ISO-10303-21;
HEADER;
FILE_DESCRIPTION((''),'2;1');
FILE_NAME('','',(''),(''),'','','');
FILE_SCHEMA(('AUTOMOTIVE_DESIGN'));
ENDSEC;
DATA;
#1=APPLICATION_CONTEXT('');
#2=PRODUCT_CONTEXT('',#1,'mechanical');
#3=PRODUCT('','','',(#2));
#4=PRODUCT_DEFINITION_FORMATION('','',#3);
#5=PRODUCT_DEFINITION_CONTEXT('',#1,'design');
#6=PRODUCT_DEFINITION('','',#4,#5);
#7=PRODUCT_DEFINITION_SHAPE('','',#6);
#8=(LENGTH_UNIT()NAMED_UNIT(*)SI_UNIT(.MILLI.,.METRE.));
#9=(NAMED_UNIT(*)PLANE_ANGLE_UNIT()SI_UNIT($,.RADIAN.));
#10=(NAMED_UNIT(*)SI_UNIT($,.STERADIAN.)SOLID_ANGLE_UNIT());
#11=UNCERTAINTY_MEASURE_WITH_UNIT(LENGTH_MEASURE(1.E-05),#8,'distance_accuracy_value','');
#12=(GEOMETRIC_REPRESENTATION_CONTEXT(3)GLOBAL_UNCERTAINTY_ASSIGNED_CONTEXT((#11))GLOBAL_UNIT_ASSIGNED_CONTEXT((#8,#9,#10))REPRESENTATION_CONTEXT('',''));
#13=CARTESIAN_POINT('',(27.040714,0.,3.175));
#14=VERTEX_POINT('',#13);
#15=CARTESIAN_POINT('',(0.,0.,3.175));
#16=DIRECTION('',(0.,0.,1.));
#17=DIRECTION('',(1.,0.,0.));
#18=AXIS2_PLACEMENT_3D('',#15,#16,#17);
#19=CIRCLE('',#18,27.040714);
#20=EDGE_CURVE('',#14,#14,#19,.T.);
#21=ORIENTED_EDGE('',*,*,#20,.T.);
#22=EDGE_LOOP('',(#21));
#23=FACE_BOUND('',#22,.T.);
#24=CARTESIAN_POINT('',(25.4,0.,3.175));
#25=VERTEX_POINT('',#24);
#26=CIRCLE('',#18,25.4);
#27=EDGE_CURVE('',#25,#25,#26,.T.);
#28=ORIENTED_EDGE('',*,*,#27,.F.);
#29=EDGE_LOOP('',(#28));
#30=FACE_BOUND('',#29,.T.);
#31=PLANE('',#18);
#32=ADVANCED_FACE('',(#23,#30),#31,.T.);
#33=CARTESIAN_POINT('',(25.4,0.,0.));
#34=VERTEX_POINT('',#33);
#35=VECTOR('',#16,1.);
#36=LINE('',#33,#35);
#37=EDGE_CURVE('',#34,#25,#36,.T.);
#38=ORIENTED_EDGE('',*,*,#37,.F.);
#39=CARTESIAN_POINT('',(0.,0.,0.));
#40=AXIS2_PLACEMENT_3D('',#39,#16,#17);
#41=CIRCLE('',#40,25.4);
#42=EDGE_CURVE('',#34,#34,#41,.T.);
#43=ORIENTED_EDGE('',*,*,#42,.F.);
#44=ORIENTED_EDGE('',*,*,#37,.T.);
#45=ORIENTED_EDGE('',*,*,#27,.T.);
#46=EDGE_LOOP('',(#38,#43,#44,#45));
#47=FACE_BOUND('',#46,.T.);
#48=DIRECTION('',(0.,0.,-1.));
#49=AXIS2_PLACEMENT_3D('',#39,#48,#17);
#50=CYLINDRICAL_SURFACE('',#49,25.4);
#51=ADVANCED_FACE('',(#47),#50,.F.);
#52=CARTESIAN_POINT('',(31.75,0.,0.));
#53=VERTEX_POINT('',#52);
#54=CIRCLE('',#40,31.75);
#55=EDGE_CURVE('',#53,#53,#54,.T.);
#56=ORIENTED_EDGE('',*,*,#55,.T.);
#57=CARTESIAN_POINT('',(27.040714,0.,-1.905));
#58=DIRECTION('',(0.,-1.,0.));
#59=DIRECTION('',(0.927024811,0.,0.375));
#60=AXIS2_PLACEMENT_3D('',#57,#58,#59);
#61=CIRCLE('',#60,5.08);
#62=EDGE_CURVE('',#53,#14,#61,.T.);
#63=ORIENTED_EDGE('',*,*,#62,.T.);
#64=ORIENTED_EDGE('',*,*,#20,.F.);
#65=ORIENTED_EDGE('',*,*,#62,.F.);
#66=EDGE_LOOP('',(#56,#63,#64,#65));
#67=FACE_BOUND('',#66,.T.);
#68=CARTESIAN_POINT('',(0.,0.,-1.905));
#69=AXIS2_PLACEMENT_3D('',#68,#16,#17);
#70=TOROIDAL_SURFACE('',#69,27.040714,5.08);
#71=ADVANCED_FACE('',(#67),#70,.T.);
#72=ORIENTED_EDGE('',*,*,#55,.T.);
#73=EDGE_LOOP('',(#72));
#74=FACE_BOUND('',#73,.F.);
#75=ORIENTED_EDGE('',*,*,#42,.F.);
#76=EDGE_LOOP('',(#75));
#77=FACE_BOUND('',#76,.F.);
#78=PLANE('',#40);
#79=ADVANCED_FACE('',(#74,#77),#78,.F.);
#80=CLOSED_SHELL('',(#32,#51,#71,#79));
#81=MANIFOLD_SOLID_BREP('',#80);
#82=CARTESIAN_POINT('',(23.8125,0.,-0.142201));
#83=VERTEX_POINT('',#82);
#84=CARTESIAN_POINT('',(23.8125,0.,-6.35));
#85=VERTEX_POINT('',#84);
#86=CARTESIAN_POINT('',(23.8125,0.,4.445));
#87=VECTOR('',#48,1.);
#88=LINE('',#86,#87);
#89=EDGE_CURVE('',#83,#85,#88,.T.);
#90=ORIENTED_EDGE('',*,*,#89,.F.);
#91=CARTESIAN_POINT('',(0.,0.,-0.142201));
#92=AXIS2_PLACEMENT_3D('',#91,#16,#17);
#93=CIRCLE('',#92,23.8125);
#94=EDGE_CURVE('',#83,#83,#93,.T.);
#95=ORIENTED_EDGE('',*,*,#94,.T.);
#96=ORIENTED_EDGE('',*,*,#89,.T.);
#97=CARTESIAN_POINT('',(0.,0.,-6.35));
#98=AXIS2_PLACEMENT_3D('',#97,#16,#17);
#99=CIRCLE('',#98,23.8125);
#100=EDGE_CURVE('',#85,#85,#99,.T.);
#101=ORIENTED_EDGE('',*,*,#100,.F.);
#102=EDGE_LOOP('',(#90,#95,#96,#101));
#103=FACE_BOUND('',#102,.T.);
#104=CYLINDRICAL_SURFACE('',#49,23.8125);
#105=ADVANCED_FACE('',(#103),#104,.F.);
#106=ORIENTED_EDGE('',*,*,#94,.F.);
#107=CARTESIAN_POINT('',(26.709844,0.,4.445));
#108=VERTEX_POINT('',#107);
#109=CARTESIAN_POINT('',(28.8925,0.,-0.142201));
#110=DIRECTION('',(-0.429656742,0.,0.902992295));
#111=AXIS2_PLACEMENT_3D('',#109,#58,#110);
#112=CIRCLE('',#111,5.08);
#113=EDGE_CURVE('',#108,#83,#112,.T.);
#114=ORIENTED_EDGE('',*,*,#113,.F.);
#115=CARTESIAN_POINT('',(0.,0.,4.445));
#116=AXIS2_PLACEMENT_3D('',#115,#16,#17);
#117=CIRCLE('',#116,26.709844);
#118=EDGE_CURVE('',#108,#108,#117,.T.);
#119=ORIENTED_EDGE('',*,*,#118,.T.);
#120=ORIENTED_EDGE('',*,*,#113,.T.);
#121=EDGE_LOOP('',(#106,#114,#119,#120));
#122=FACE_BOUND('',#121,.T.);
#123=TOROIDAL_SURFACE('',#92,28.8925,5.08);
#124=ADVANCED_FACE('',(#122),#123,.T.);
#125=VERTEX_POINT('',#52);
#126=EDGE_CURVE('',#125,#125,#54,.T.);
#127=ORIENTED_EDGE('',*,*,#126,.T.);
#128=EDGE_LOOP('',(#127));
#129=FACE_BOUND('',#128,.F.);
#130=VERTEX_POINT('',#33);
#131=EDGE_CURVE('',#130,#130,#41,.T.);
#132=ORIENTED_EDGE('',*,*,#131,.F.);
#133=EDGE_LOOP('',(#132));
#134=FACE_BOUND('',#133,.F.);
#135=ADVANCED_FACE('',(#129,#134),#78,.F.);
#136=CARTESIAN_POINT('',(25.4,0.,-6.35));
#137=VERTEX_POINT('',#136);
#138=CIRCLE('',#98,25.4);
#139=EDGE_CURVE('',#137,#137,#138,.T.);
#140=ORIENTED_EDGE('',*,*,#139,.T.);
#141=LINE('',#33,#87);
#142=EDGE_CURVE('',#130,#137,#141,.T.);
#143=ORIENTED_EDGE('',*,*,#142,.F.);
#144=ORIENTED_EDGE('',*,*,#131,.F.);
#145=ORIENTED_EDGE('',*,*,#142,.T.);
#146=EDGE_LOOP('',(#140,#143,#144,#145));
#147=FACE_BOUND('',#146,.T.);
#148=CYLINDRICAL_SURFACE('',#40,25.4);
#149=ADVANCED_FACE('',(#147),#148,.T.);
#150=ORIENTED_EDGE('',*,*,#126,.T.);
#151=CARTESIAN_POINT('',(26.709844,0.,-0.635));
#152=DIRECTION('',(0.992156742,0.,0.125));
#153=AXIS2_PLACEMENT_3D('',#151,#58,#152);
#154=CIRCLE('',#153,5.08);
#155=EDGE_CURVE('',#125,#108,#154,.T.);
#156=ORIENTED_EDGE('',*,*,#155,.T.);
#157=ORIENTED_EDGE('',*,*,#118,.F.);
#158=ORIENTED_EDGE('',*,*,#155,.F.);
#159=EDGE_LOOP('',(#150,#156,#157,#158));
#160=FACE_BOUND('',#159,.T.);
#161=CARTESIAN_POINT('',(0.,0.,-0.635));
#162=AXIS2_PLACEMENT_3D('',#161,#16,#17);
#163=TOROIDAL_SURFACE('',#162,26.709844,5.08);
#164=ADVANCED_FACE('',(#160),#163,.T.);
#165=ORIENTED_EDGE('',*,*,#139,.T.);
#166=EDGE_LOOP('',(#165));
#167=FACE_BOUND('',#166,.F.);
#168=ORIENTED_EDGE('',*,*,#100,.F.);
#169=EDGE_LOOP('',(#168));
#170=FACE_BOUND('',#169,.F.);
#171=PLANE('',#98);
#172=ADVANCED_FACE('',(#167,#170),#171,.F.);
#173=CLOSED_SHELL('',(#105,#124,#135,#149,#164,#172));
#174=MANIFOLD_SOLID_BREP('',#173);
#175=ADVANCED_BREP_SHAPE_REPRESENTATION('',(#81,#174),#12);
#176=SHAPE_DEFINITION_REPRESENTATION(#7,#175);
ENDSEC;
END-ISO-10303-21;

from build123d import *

# Parameters (mm, degrees)
F0_R     = 25.4
F0_R_2   = 23.8125
F1_DEPTH = 6.35
F0_R_3   = 31.75
F2_DEPTH = 4.445
F5_DEPTH = 3.175


# Not quite as in the source:
# - a fillet or chamfer that OpenCascade refuses, or shapes differently, is made with other operations: its cross-section is extruded or revolved along the edge and cut away or added


with BuildPart() as f1:
    # F0 (on Top) → F1 (new body)
    with BuildSketch(Plane.XY):
        Circle(F0_R)
        Circle(F0_R_2, mode=Mode.SUBTRACT)
    extrude(amount=-F1_DEPTH)

    # F0 (on Top) → F2 (join)
    with BuildSketch(Plane.XY):
        Circle(F0_R_3)
        Circle(F0_R, mode=Mode.SUBTRACT)
        Circle(F0_R)
        Circle(F0_R_2, mode=Mode.SUBTRACT)
    extrude(amount=F2_DEPTH)

    # F3: fillet of radius 5.08 on 1 edges, made by hand

    # F3_s1 → F3_t2 (revolve, cut)
    with BuildSketch(Plane.XZ):
        with BuildLine():
            ThreePointArc((31.75, 0), (30.0699479175, 3.175), (26.7098437524, 4.445))
            Line((26.7098437524, 4.445), (31.75, 4.445))
            Line((31.75, 4.445), (31.75, 0))
        make_face()
    revolve(axis=Axis((0, 0, 4.445), (0, 0, 1)), mode=Mode.SUBTRACT)

    # F4: fillet of radius 5.08 on 1 edges, made by hand

    # F4_s1 → F4_t2 (revolve, cut)
    with BuildSketch(Plane.XZ):
        with BuildLine():
            ThreePointArc((26.7098437524, 4.445), (24.5974858127, 2.5705934827), (23.8125, -0.1422008573))
            Line((23.8125, -0.1422008573), (23.8125, 4.445))
            Line((23.8125, 4.445), (26.7098437524, 4.445))
        make_face()
    revolve(axis=Axis((0, 0, 4.445), (0, 0, 1)), mode=Mode.SUBTRACT)


with BuildPart() as f5:
    # F0 (on Top) → F5 (new body)
    with BuildSketch(Plane.XY):
        Circle(F0_R_3)
        Circle(F0_R, mode=Mode.SUBTRACT)
    extrude(amount=F5_DEPTH)

    # F6: fillet of radius 5.08 on 1 edges, made by hand

    # F6_s1 → F6_t2 (revolve, cut)
    with BuildSketch(Plane.XZ):
        with BuildLine():
            ThreePointArc((31.75, 0), (29.8805202921, 2.3071134838), (27.0407139607, 3.175))
            Line((27.0407139607, 3.175), (31.75, 3.175))
            Line((31.75, 3.175), (31.75, 0))
        make_face()
    revolve(axis=Axis((0, 0, 3.175), (0, 0, 1)), mode=Mode.SUBTRACT)


solid = Compound([f1.part, f5.part])
